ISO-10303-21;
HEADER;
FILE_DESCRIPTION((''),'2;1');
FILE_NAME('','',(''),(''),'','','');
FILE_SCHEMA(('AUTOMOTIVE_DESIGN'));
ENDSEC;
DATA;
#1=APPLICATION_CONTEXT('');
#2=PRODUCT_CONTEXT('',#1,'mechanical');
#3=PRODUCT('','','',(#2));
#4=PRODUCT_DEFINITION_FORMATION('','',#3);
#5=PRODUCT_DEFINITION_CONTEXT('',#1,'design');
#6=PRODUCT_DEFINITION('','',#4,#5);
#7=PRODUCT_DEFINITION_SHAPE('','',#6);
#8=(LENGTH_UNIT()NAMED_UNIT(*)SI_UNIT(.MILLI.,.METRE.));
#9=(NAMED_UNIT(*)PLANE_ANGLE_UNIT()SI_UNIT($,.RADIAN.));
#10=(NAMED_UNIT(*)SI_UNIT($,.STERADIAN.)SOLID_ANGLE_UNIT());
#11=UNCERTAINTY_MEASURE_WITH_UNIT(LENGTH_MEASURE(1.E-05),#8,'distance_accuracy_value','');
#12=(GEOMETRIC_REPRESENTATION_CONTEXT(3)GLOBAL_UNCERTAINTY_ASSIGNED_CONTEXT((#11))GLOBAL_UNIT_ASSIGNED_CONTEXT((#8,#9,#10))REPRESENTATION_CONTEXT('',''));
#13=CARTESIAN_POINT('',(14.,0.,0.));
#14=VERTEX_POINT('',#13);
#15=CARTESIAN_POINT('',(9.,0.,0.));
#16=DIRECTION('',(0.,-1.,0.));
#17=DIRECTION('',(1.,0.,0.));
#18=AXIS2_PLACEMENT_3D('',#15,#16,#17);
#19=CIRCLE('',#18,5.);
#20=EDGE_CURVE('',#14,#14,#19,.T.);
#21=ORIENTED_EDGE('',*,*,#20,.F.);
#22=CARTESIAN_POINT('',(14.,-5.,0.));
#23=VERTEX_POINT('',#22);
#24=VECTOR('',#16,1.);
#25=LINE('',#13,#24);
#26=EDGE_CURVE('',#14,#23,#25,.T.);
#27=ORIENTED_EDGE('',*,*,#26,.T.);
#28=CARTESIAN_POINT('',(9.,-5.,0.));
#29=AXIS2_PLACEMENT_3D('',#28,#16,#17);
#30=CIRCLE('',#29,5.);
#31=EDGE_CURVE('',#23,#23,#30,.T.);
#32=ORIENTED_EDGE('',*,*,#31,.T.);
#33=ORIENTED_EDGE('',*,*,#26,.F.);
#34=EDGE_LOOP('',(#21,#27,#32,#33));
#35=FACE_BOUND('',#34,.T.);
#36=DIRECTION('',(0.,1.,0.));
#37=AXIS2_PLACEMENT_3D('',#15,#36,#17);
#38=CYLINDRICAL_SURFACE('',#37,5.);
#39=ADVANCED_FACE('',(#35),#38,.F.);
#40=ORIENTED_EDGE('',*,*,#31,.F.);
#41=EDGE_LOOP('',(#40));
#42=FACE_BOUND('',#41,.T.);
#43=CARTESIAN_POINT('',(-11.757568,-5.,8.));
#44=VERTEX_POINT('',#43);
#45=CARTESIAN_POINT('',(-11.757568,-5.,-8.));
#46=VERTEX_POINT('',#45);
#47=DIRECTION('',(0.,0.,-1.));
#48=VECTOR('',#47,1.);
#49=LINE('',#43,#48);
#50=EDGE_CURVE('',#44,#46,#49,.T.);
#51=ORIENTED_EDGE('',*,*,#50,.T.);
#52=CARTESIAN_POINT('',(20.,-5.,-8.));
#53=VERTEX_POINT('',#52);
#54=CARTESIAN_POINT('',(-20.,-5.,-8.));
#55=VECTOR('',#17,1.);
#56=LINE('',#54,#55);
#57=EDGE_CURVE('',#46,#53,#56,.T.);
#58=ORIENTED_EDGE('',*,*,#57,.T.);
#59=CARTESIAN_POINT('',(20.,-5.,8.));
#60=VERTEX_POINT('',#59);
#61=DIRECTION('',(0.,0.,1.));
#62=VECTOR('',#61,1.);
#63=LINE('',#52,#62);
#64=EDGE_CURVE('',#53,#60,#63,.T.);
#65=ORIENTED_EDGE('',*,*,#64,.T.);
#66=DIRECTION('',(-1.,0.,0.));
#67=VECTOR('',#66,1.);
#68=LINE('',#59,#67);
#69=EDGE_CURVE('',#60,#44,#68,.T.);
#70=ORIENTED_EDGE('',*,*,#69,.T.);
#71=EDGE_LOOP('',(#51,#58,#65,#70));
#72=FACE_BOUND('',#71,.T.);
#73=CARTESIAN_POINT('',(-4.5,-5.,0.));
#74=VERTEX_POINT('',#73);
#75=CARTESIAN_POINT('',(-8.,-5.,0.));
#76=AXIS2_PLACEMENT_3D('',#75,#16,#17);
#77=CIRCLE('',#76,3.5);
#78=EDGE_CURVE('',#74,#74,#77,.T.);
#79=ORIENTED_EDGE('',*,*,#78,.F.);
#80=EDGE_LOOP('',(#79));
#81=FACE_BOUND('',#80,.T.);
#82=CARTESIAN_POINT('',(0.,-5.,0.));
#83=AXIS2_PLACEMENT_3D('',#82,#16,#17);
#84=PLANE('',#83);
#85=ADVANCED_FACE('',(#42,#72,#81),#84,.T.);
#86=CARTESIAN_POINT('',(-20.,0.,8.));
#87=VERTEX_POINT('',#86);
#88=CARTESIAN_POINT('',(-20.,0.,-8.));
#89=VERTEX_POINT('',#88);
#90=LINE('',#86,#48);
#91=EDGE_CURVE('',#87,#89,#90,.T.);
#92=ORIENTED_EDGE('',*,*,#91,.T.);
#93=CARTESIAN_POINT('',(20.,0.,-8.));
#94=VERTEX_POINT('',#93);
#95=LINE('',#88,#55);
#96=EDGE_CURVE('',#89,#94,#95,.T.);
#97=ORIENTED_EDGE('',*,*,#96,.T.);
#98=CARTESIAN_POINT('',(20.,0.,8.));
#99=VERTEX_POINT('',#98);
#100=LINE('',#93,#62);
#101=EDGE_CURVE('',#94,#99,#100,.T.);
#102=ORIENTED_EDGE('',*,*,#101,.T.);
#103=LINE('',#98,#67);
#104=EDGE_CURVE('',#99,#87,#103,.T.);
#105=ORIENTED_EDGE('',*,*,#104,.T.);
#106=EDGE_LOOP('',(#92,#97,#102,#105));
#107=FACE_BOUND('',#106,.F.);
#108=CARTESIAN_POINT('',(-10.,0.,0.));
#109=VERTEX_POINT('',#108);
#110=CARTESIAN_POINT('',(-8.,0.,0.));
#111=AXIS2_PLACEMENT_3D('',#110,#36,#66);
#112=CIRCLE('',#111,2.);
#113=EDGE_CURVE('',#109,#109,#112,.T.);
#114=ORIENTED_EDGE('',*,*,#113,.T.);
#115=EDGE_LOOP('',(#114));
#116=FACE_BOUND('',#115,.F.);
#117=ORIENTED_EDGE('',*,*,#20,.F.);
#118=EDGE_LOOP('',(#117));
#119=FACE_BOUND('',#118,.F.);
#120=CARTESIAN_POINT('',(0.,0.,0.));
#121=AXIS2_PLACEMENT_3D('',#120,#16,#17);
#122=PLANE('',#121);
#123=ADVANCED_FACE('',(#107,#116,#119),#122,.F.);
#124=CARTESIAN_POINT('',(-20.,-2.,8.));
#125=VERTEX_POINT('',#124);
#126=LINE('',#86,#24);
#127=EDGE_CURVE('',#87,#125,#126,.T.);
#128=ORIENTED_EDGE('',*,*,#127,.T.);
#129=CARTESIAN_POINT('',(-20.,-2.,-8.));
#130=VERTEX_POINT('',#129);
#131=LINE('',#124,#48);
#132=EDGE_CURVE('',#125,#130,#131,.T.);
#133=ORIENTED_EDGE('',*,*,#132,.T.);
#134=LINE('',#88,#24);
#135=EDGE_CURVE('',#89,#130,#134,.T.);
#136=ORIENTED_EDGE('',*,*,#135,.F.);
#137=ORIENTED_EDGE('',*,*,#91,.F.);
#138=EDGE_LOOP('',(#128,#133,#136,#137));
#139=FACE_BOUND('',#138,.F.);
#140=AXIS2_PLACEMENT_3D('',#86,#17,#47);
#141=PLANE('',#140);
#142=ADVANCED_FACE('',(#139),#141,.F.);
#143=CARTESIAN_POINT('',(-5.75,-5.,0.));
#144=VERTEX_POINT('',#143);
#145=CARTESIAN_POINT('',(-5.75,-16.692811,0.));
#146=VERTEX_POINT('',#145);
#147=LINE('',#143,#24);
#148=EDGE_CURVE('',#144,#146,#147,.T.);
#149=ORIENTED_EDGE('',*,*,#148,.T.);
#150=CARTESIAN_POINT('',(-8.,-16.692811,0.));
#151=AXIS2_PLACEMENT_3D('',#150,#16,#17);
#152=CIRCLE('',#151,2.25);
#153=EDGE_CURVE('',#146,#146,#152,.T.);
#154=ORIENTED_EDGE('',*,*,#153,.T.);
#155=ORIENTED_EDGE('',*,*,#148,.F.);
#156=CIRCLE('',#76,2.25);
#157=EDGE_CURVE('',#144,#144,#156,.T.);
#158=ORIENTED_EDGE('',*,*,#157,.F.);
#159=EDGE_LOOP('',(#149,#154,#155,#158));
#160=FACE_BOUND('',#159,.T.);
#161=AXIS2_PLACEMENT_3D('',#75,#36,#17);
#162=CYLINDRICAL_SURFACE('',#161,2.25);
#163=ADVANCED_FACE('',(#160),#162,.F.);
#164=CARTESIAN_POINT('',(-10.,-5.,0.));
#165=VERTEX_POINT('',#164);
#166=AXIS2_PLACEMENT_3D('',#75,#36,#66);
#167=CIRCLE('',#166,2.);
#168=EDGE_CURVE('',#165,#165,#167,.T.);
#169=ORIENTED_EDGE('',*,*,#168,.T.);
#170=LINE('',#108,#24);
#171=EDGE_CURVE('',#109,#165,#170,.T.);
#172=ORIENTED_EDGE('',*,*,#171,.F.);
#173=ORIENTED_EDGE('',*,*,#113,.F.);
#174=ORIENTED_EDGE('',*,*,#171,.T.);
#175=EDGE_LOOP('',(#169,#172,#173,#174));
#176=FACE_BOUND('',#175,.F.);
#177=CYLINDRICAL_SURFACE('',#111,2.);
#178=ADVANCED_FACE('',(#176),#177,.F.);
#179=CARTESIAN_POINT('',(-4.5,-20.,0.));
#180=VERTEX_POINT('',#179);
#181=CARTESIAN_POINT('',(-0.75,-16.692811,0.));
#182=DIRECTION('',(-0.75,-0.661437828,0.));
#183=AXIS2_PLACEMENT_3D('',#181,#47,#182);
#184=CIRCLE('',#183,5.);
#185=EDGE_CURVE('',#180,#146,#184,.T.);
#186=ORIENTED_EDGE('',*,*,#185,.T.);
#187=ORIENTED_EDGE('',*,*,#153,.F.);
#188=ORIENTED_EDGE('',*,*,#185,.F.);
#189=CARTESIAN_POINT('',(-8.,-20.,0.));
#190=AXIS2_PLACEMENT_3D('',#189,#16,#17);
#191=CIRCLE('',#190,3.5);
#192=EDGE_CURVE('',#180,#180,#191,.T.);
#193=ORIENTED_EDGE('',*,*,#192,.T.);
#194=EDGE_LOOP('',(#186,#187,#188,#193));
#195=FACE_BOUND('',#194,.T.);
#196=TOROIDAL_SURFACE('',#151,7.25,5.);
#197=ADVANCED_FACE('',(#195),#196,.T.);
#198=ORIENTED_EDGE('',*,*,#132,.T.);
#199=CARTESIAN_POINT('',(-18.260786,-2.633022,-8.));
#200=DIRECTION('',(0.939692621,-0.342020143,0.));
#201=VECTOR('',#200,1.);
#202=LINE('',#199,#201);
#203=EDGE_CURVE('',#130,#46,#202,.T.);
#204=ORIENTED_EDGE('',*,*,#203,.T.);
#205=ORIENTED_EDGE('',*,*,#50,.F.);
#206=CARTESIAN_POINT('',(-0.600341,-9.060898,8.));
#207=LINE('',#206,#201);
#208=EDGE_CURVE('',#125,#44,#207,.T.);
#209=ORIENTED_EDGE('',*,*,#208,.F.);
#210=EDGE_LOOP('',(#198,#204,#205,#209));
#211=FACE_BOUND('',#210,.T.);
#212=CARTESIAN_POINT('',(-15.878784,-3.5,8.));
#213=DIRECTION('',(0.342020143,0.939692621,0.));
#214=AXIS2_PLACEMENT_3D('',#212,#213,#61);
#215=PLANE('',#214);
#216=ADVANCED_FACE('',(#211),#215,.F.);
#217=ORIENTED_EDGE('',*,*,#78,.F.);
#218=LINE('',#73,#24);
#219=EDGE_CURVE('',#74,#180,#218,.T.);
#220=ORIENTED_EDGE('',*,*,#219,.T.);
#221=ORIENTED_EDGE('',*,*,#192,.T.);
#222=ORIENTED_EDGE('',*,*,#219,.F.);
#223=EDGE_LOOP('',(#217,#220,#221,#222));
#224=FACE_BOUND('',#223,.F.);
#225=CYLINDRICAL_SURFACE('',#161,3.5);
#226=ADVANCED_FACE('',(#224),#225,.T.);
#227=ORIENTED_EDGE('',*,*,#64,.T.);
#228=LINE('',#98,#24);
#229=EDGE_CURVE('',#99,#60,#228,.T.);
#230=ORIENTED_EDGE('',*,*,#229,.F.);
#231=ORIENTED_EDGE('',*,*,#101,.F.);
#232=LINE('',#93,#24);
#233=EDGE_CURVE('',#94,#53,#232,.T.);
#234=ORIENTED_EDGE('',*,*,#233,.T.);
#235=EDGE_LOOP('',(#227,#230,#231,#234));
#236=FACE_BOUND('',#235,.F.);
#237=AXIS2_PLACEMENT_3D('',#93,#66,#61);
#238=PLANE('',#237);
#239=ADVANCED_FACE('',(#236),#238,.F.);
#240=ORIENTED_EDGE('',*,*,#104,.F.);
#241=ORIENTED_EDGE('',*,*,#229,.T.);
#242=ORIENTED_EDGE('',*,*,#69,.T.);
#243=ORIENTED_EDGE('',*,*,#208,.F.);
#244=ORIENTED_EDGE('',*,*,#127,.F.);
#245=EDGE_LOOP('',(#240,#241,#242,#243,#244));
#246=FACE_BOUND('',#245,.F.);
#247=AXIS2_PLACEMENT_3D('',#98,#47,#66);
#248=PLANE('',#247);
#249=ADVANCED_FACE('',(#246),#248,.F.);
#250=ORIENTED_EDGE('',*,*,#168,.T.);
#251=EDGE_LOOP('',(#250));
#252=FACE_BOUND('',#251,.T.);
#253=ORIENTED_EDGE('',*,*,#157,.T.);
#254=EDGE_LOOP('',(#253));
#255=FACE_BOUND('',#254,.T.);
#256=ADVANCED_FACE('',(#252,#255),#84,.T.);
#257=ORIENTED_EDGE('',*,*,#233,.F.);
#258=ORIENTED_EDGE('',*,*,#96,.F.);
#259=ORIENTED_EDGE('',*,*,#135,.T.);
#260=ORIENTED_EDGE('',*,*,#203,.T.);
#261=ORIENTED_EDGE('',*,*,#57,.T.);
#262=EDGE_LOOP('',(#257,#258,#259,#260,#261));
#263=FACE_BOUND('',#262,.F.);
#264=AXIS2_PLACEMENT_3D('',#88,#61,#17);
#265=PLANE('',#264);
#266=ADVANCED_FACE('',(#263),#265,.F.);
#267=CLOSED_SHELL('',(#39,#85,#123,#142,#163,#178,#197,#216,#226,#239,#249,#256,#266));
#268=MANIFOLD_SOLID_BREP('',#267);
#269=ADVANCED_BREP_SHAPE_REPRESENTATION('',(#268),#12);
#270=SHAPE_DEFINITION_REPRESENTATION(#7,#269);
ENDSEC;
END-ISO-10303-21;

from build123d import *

# Parameters (mm, degrees)
F0_R     = 5
F1_DEPTH = 5
F2_R     = 3.5
F2_R_2   = 2.25
F3_DEPTH = 15
F5_SIZE2 = 8.2424322584
F5_SIZE  = 3


# Not quite as in the source:
# - a fillet or chamfer that OpenCascade refuses, or shapes differently, is made with other operations: its cross-section is extruded or revolved along the edge and cut away or added


with BuildPart() as f1:
    # F0 (on Front) → F1 (new body)
    with BuildSketch(Plane.XZ):
        Polygon((-20, -8), (20, -8), (20, 0), (20, 8), (-20, 8), (-20, 0), align=None)
        with BuildLine():
            ThreePointArc((-6, 0), (-8, -2), (-10, 0))
            ThreePointArc((-10, 0), (-8, 2), (-6, 0))
        make_face(mode=Mode.SUBTRACT)
        with Locations((9, 0)):
            Circle(F0_R, mode=Mode.SUBTRACT)
    extrude(amount=F1_DEPTH)

    # F2 (on face) → F3 (join)
    with BuildSketch(Plane.XZ.offset(5)):
        with Locations((-8, 0)):
            Circle(F2_R)
        with Locations((-8, 0)):
            Circle(F2_R_2, mode=Mode.SUBTRACT)
    extrude(amount=F3_DEPTH)

    # F4: fillet of radius 5 on 1 edges, made by hand

    # F4_s1 → F4_t2 (revolve, cut)
    with BuildSketch(Plane.XY):
        with BuildLine():
            ThreePointArc((-4.5, -20), (-5.4270717335, -18.4605778141), (-5.75, -16.6928108612))
            Line((-5.75, -16.6928108612), (-5.75, -20))
            Line((-5.75, -20), (-4.5, -20))
        make_face()
    revolve(axis=Axis((-8, -20, 0), (0, -1, 0)), mode=Mode.SUBTRACT)

    # F5
    f5_edges = [f1.edges().sort_by_distance(p)[0] for p in [
        (-20, -5, 0),
    ]]
    f5_side = f1.faces().sort_by_distance((-20, -2.5, 0))[0]
    chamfer(f5_edges, length=F5_SIZE, length2=F5_SIZE2, reference=f5_side)


solid = f1.part
